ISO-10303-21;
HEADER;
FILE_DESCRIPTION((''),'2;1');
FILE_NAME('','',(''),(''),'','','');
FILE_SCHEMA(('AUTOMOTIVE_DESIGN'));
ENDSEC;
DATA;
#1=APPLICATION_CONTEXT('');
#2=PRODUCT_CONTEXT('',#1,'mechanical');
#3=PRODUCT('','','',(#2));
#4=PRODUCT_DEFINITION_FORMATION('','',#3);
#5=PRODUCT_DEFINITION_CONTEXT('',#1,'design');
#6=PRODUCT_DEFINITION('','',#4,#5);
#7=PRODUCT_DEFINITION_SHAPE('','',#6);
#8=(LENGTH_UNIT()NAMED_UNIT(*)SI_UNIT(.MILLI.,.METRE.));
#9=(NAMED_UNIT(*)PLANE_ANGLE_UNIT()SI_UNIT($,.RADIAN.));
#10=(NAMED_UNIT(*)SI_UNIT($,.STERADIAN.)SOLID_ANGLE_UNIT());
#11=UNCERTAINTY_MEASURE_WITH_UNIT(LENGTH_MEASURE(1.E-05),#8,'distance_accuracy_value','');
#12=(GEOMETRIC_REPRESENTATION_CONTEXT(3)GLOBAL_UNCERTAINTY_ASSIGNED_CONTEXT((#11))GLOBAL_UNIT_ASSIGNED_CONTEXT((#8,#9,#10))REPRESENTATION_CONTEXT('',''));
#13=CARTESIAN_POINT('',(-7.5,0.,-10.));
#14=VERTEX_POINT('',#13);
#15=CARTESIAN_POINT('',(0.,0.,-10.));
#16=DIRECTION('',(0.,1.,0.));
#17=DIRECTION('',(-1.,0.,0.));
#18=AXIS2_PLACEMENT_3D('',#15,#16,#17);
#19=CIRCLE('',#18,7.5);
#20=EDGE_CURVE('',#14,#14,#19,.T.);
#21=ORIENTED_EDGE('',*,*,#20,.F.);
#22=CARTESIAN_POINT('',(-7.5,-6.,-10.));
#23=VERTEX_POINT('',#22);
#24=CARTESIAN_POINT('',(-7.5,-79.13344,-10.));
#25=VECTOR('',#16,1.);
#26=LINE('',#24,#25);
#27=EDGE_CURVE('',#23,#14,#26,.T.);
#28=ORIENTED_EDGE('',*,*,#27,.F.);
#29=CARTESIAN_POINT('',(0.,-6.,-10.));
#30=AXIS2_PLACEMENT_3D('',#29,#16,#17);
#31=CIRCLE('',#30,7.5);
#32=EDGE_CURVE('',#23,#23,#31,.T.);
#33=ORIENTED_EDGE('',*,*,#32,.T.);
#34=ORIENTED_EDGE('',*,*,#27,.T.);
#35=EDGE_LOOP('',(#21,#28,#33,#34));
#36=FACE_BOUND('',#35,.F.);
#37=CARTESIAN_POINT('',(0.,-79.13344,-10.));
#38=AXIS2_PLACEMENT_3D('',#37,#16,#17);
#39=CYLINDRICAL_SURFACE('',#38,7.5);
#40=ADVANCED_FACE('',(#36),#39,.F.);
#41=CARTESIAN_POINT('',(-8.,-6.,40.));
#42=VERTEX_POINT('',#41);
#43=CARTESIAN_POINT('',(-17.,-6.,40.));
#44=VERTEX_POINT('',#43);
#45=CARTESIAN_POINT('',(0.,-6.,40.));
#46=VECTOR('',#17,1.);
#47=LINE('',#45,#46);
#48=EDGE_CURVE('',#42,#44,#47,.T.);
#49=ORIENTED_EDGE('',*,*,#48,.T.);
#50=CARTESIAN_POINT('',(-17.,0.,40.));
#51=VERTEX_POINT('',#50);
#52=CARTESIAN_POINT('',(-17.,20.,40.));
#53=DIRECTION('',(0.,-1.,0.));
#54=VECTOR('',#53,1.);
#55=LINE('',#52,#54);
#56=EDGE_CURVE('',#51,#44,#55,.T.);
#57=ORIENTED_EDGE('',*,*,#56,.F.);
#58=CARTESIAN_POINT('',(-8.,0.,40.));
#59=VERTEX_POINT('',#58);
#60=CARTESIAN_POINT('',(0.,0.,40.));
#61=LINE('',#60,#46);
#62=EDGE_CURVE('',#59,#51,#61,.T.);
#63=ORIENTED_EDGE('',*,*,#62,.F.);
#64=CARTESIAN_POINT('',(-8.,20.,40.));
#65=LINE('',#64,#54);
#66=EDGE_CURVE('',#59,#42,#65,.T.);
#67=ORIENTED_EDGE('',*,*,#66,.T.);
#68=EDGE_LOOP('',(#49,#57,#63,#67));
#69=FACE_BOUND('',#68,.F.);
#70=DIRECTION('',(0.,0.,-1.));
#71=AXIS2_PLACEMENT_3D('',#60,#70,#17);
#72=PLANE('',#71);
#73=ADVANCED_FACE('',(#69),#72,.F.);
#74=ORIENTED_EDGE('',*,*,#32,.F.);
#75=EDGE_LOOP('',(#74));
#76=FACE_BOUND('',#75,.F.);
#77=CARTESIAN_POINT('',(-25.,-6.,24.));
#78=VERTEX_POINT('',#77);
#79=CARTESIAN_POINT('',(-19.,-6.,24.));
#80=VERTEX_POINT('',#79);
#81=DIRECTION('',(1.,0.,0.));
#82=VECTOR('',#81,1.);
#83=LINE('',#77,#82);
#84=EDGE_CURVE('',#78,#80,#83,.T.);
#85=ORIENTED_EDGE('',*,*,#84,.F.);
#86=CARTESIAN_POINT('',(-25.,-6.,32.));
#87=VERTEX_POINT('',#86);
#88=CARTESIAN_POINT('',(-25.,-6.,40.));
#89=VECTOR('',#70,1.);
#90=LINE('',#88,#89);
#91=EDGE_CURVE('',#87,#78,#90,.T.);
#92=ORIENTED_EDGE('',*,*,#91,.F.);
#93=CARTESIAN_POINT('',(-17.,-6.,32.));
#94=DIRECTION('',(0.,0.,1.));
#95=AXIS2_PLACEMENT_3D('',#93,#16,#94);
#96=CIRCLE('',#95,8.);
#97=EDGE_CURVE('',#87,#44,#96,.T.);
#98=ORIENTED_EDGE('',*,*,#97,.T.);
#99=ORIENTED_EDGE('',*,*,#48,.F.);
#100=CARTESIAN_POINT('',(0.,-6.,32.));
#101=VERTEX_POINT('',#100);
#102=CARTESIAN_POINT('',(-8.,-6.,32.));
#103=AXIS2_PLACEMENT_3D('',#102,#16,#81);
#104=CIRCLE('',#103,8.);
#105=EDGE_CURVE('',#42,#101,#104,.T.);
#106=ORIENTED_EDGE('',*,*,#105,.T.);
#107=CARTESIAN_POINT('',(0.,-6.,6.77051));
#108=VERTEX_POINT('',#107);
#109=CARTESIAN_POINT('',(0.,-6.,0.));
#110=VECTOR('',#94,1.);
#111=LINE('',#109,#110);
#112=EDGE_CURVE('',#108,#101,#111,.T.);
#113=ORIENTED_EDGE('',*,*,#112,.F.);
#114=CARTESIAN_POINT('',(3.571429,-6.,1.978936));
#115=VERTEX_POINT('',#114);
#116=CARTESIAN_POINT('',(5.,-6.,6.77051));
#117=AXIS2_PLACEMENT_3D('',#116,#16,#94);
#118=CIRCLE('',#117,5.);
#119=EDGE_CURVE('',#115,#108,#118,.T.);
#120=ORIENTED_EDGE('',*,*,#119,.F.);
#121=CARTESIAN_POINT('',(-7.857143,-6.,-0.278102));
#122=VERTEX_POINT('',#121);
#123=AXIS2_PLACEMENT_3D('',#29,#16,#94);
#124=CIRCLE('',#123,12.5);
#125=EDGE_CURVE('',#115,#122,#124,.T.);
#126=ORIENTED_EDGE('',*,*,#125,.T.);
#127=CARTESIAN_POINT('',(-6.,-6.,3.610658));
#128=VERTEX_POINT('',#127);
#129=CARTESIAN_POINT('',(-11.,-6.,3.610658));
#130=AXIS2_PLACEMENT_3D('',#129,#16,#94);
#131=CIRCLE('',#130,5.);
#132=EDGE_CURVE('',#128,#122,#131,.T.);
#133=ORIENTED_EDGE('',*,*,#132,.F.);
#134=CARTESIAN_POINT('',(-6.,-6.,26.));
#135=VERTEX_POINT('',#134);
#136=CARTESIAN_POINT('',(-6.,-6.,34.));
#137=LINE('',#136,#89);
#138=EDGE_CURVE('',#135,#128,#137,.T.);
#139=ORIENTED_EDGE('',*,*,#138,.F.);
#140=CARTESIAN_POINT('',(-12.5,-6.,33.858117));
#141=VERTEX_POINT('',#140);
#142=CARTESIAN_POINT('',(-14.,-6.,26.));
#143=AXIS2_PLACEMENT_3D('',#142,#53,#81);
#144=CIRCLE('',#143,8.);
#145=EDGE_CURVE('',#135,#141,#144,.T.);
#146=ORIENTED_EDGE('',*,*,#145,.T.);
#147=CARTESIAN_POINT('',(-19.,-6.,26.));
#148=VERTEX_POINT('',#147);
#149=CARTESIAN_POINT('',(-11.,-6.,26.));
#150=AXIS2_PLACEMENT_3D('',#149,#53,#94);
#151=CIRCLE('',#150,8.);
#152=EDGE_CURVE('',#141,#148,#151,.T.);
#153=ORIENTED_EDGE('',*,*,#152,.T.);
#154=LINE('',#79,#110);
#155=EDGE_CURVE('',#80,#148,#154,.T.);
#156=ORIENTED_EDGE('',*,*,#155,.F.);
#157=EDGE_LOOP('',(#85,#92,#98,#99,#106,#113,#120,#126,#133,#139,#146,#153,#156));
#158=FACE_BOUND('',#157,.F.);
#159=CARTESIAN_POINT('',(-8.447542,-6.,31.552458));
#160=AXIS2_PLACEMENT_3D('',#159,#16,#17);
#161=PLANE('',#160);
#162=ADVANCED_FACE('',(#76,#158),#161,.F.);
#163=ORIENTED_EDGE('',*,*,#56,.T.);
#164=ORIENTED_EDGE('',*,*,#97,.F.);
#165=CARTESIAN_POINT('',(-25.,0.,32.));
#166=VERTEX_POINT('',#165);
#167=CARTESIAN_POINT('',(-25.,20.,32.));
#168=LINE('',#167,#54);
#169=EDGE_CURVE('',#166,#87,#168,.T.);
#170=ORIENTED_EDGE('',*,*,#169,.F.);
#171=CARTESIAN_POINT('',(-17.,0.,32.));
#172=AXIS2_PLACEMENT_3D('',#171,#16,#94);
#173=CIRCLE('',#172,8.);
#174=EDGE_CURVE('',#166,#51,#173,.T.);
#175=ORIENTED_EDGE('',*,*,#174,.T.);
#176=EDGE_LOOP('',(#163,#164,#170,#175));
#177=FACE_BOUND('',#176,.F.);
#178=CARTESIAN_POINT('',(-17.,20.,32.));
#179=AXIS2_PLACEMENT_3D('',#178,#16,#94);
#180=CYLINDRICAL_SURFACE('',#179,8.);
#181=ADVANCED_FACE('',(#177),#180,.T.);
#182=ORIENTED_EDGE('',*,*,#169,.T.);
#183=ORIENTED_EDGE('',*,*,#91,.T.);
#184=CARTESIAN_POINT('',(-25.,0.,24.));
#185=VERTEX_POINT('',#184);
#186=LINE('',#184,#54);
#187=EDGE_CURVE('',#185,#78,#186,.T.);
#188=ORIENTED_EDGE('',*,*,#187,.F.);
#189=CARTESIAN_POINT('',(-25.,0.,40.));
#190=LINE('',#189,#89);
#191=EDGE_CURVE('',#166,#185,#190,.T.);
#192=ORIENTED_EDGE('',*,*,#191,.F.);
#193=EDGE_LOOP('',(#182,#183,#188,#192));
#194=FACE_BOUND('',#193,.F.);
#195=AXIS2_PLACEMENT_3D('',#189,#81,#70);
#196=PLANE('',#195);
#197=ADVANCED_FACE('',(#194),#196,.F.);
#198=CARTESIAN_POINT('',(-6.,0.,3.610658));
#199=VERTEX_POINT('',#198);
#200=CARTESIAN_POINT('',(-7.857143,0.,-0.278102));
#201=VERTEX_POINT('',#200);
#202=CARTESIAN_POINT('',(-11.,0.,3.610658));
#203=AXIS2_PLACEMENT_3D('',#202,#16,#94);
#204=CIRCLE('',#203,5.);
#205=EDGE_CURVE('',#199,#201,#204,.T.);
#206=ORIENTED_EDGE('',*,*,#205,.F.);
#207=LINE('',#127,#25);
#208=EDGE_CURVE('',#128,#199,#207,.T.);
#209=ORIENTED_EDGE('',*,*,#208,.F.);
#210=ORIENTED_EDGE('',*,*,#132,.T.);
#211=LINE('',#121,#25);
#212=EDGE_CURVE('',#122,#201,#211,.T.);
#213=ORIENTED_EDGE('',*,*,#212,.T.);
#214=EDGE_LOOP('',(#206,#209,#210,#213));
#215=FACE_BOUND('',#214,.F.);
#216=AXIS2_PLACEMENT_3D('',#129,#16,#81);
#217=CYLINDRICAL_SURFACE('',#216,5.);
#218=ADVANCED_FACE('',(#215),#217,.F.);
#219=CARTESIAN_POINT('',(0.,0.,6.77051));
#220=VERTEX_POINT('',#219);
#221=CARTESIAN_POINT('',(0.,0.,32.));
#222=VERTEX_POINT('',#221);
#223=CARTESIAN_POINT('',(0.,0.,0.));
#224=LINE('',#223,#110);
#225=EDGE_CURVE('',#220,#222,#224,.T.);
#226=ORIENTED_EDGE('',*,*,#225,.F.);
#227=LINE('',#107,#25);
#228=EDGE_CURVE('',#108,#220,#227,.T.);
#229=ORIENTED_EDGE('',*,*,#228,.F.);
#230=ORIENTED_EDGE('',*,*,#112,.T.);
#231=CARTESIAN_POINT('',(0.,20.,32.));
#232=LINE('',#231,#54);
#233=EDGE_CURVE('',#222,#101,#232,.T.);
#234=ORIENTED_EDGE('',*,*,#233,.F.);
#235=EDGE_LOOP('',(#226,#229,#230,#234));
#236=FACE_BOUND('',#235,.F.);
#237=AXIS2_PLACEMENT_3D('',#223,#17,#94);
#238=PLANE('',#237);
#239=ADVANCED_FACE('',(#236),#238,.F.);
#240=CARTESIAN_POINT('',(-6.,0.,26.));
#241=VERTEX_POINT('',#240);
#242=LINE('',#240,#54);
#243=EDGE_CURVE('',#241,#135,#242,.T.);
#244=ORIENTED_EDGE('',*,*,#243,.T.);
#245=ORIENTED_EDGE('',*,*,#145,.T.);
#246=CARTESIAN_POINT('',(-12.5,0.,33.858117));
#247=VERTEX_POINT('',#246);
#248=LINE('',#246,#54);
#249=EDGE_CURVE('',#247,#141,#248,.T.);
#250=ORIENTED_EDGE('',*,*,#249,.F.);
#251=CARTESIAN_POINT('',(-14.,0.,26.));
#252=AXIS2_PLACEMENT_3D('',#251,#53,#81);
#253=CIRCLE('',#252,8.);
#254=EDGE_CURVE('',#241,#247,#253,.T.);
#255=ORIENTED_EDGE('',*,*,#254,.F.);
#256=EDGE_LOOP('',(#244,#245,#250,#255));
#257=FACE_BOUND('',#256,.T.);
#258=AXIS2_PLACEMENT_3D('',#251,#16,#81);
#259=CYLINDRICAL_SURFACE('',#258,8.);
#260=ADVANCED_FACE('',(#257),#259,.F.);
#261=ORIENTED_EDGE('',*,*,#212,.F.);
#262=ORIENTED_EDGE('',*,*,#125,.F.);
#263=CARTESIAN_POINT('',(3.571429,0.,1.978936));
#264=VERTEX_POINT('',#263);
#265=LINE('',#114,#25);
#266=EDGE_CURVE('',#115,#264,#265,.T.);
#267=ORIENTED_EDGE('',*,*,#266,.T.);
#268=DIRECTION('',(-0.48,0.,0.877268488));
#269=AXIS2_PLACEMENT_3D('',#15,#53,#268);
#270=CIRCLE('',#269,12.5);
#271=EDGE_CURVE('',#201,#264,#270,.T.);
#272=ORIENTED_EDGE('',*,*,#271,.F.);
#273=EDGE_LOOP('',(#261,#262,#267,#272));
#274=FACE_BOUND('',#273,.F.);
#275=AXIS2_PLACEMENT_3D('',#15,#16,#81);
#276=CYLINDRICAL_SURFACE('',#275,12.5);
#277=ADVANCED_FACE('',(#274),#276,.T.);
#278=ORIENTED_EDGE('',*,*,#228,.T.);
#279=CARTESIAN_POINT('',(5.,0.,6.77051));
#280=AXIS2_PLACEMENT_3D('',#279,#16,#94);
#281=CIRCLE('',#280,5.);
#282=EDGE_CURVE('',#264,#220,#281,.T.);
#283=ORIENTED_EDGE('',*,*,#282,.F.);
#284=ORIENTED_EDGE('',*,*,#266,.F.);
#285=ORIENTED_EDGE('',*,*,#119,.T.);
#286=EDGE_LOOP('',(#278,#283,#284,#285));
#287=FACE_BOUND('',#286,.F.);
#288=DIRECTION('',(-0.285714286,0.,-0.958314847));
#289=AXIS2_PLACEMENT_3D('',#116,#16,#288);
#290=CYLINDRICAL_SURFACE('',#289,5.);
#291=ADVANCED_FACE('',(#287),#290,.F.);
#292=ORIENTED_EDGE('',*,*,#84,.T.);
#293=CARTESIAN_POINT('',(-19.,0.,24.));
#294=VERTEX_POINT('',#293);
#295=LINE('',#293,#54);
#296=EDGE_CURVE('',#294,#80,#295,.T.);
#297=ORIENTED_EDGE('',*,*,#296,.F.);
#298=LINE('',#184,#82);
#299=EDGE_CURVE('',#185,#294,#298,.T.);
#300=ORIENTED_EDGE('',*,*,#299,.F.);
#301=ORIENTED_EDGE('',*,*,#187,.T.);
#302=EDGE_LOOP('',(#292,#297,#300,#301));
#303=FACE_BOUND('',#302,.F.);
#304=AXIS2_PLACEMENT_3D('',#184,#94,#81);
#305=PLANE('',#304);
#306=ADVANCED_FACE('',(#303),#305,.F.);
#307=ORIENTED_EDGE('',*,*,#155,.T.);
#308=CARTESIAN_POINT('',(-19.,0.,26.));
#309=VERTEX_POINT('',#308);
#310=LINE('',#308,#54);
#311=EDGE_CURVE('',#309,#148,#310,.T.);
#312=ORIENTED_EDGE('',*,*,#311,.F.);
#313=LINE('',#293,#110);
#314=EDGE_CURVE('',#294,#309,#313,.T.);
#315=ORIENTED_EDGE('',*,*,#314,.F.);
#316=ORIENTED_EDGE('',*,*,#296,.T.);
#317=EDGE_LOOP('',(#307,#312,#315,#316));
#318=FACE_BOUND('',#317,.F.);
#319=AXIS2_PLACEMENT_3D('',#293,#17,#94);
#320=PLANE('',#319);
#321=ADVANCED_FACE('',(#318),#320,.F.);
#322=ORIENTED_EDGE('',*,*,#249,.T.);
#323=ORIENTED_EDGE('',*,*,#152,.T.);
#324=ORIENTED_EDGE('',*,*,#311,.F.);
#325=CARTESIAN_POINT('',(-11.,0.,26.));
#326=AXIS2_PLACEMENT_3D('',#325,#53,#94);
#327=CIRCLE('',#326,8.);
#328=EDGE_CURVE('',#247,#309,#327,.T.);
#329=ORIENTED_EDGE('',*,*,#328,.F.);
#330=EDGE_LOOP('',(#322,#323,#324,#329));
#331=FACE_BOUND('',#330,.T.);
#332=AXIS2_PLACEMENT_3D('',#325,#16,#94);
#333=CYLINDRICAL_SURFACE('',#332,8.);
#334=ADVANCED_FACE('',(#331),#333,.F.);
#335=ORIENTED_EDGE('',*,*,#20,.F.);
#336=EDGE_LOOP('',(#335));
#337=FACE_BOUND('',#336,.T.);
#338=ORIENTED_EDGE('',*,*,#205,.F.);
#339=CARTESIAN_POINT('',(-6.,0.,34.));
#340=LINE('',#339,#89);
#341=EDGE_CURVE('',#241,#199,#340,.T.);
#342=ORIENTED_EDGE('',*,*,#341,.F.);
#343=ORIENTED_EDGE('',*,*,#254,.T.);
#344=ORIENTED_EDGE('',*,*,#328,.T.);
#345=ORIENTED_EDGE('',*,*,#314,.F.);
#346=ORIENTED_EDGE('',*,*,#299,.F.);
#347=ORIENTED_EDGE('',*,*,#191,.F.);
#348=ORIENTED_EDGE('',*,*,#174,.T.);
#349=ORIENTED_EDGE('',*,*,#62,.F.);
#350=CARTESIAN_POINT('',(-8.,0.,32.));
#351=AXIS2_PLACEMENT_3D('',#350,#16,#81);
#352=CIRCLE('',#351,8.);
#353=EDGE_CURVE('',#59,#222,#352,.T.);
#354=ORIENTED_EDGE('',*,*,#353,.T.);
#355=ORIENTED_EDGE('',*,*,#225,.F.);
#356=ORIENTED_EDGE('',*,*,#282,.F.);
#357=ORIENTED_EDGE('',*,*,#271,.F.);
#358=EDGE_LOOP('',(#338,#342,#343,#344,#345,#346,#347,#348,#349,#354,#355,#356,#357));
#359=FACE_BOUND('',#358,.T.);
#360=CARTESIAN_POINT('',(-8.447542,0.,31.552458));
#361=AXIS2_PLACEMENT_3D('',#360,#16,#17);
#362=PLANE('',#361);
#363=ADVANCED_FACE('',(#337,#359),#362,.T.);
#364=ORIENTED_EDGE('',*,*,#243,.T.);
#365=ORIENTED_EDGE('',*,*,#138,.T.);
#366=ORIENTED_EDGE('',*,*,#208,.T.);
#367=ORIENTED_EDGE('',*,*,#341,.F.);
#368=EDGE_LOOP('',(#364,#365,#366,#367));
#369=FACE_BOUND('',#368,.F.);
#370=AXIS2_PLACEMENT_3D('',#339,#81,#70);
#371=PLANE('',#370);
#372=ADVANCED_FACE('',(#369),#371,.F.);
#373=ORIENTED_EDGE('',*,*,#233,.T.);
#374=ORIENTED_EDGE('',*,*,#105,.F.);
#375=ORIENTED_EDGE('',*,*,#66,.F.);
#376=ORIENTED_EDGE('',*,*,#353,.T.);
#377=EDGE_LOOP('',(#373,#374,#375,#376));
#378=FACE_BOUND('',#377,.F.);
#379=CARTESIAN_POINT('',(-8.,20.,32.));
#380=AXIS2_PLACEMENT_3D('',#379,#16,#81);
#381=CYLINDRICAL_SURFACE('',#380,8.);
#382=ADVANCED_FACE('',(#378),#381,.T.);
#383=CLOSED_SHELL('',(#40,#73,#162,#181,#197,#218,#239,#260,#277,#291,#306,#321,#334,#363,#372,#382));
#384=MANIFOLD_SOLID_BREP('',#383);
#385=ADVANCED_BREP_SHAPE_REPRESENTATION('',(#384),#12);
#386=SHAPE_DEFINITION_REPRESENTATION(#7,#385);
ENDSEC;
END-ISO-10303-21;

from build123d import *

# Parameters (mm, degrees)
F1_DEPTH    = 6
F2_R        = 12.5
F3_DEPTH    = 6
F5_D        = 15
F6_T1_DEPTH = 6
F6_T3_DEPTH = 46
F7_R        = 5


# Not quite as in the source:
# - a fillet or chamfer that OpenCascade refuses, or shapes differently, is made with other operations: its cross-section is extruded or revolved along the edge and cut away or added


with BuildPart() as f1:
    # F0 (on Front) → F1 (new body)
    with BuildSketch(Plane.XZ):
        Polygon((0, 0), (0, 40), (-25, 40), (-25, 24), (-19, 24), (-19, 34), (-6, 34), (-6, 0), align=None)
    extrude(amount=F1_DEPTH)

    # F2 (on Front) → F3 (join)
    with BuildSketch(Plane.XZ):
        with Locations((0, -10)):
            Circle(F2_R)
    extrude(amount=F3_DEPTH)

    # F5 (through all)
    with Locations(Plane.XZ.offset(6)):
        with Locations((0, -10)):
            Hole(F5_D / 2)

    # F6: fillet of radius 8 on 4 edges, made by hand

    # F6_s2 → F6_t1 (join)
    with BuildSketch(Plane.XZ):
        with BuildLine():
            ThreePointArc((-6, 26), (-8.3431457505, 31.6568542495), (-14, 34))
            Line((-14, 34), (-6, 34))
            Line((-6, 34), (-6, 26))
        make_face()
        with BuildLine():
            ThreePointArc((-11, 34), (-16.6568542495, 31.6568542495), (-19, 26))
            Line((-19, 26), (-19, 34))
            Line((-19, 34), (-11, 34))
        make_face()
    extrude(amount=F6_T1_DEPTH)

    # F6_s4 → F6_t3 (cut)
    with BuildSketch(Plane.XZ.offset(-20)):
        with BuildLine():
            ThreePointArc((0, 32), (-2.3431457505, 37.6568542495), (-8, 40))
            Line((-8, 40), (0, 40))
            Line((0, 40), (0, 32))
        make_face()
        with BuildLine():
            ThreePointArc((-17, 40), (-22.6568542495, 37.6568542495), (-25, 32))
            Line((-25, 32), (-25, 40))
            Line((-25, 40), (-17, 40))
        make_face()
    extrude(amount=F6_T3_DEPTH, mode=Mode.SUBTRACT)

    # F7
    f7_edges = [f1.edges().sort_by_distance(p)[0] for p in [
        (-6, -3, 0.965856),
        (0, -3, 2.5),
    ]]
    fillet(f7_edges, radius=F7_R)


solid = f1.part
